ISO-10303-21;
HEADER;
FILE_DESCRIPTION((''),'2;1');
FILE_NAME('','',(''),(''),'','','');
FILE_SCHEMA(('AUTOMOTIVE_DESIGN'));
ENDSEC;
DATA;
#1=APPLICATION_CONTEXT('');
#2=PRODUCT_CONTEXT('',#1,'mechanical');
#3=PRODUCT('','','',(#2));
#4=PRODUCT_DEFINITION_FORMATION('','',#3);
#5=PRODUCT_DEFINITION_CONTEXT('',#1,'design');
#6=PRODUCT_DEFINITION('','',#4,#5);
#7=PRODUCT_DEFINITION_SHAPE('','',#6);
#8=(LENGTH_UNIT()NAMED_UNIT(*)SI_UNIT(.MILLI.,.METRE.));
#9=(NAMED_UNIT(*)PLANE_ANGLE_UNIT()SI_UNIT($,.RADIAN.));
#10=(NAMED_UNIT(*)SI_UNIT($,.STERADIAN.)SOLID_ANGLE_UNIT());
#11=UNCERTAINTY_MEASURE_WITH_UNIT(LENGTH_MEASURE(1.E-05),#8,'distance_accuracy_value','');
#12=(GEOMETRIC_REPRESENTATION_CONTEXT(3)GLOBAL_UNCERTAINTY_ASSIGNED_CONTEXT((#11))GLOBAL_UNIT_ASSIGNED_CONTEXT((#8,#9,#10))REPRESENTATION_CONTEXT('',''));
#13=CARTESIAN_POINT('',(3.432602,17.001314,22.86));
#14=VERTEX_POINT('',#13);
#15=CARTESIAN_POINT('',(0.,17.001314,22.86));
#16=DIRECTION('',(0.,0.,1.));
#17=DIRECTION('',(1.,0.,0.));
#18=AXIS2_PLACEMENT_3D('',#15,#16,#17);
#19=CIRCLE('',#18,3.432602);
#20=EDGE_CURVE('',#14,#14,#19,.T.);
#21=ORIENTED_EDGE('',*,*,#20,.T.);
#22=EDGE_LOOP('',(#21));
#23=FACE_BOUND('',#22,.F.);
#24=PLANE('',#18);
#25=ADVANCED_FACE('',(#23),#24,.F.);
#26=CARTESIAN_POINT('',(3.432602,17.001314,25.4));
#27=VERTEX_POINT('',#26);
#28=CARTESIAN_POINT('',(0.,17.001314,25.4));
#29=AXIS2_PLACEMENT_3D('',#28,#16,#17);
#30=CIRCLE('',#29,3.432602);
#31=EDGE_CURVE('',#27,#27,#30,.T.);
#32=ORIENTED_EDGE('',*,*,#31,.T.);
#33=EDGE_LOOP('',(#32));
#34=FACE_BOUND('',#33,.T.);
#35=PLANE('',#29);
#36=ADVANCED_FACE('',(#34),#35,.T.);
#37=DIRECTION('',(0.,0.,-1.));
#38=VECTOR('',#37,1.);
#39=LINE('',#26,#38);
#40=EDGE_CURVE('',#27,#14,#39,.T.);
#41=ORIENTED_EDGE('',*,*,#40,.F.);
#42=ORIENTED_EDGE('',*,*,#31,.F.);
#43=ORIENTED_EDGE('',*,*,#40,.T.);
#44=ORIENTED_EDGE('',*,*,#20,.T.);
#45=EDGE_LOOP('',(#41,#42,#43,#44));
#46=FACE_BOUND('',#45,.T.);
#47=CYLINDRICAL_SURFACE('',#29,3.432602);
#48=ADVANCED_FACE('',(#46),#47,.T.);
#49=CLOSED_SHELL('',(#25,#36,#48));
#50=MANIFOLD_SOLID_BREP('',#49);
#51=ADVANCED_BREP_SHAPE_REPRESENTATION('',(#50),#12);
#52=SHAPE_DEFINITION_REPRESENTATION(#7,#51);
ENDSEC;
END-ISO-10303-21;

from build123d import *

# Parameters (mm, degrees)
F5_R     = 3.4326019605
F6_DEPTH = 2.54


# Not quite as in the source:
# - a feature of the source that left no trace in its solid (it failed there, or was rolled back) is left out
# - the program builds the solid bodies; features that only make, move or delete a surface that nothing else refers to are left out


with BuildPart() as f6:
    # F5 (on offset) → F6 (new body)
    with BuildSketch(Plane.XY.offset(25.4)):
        with Locations((0, 17.0013140887)):
            Circle(F5_R)
    extrude(amount=-F6_DEPTH)


solid = f6.part
